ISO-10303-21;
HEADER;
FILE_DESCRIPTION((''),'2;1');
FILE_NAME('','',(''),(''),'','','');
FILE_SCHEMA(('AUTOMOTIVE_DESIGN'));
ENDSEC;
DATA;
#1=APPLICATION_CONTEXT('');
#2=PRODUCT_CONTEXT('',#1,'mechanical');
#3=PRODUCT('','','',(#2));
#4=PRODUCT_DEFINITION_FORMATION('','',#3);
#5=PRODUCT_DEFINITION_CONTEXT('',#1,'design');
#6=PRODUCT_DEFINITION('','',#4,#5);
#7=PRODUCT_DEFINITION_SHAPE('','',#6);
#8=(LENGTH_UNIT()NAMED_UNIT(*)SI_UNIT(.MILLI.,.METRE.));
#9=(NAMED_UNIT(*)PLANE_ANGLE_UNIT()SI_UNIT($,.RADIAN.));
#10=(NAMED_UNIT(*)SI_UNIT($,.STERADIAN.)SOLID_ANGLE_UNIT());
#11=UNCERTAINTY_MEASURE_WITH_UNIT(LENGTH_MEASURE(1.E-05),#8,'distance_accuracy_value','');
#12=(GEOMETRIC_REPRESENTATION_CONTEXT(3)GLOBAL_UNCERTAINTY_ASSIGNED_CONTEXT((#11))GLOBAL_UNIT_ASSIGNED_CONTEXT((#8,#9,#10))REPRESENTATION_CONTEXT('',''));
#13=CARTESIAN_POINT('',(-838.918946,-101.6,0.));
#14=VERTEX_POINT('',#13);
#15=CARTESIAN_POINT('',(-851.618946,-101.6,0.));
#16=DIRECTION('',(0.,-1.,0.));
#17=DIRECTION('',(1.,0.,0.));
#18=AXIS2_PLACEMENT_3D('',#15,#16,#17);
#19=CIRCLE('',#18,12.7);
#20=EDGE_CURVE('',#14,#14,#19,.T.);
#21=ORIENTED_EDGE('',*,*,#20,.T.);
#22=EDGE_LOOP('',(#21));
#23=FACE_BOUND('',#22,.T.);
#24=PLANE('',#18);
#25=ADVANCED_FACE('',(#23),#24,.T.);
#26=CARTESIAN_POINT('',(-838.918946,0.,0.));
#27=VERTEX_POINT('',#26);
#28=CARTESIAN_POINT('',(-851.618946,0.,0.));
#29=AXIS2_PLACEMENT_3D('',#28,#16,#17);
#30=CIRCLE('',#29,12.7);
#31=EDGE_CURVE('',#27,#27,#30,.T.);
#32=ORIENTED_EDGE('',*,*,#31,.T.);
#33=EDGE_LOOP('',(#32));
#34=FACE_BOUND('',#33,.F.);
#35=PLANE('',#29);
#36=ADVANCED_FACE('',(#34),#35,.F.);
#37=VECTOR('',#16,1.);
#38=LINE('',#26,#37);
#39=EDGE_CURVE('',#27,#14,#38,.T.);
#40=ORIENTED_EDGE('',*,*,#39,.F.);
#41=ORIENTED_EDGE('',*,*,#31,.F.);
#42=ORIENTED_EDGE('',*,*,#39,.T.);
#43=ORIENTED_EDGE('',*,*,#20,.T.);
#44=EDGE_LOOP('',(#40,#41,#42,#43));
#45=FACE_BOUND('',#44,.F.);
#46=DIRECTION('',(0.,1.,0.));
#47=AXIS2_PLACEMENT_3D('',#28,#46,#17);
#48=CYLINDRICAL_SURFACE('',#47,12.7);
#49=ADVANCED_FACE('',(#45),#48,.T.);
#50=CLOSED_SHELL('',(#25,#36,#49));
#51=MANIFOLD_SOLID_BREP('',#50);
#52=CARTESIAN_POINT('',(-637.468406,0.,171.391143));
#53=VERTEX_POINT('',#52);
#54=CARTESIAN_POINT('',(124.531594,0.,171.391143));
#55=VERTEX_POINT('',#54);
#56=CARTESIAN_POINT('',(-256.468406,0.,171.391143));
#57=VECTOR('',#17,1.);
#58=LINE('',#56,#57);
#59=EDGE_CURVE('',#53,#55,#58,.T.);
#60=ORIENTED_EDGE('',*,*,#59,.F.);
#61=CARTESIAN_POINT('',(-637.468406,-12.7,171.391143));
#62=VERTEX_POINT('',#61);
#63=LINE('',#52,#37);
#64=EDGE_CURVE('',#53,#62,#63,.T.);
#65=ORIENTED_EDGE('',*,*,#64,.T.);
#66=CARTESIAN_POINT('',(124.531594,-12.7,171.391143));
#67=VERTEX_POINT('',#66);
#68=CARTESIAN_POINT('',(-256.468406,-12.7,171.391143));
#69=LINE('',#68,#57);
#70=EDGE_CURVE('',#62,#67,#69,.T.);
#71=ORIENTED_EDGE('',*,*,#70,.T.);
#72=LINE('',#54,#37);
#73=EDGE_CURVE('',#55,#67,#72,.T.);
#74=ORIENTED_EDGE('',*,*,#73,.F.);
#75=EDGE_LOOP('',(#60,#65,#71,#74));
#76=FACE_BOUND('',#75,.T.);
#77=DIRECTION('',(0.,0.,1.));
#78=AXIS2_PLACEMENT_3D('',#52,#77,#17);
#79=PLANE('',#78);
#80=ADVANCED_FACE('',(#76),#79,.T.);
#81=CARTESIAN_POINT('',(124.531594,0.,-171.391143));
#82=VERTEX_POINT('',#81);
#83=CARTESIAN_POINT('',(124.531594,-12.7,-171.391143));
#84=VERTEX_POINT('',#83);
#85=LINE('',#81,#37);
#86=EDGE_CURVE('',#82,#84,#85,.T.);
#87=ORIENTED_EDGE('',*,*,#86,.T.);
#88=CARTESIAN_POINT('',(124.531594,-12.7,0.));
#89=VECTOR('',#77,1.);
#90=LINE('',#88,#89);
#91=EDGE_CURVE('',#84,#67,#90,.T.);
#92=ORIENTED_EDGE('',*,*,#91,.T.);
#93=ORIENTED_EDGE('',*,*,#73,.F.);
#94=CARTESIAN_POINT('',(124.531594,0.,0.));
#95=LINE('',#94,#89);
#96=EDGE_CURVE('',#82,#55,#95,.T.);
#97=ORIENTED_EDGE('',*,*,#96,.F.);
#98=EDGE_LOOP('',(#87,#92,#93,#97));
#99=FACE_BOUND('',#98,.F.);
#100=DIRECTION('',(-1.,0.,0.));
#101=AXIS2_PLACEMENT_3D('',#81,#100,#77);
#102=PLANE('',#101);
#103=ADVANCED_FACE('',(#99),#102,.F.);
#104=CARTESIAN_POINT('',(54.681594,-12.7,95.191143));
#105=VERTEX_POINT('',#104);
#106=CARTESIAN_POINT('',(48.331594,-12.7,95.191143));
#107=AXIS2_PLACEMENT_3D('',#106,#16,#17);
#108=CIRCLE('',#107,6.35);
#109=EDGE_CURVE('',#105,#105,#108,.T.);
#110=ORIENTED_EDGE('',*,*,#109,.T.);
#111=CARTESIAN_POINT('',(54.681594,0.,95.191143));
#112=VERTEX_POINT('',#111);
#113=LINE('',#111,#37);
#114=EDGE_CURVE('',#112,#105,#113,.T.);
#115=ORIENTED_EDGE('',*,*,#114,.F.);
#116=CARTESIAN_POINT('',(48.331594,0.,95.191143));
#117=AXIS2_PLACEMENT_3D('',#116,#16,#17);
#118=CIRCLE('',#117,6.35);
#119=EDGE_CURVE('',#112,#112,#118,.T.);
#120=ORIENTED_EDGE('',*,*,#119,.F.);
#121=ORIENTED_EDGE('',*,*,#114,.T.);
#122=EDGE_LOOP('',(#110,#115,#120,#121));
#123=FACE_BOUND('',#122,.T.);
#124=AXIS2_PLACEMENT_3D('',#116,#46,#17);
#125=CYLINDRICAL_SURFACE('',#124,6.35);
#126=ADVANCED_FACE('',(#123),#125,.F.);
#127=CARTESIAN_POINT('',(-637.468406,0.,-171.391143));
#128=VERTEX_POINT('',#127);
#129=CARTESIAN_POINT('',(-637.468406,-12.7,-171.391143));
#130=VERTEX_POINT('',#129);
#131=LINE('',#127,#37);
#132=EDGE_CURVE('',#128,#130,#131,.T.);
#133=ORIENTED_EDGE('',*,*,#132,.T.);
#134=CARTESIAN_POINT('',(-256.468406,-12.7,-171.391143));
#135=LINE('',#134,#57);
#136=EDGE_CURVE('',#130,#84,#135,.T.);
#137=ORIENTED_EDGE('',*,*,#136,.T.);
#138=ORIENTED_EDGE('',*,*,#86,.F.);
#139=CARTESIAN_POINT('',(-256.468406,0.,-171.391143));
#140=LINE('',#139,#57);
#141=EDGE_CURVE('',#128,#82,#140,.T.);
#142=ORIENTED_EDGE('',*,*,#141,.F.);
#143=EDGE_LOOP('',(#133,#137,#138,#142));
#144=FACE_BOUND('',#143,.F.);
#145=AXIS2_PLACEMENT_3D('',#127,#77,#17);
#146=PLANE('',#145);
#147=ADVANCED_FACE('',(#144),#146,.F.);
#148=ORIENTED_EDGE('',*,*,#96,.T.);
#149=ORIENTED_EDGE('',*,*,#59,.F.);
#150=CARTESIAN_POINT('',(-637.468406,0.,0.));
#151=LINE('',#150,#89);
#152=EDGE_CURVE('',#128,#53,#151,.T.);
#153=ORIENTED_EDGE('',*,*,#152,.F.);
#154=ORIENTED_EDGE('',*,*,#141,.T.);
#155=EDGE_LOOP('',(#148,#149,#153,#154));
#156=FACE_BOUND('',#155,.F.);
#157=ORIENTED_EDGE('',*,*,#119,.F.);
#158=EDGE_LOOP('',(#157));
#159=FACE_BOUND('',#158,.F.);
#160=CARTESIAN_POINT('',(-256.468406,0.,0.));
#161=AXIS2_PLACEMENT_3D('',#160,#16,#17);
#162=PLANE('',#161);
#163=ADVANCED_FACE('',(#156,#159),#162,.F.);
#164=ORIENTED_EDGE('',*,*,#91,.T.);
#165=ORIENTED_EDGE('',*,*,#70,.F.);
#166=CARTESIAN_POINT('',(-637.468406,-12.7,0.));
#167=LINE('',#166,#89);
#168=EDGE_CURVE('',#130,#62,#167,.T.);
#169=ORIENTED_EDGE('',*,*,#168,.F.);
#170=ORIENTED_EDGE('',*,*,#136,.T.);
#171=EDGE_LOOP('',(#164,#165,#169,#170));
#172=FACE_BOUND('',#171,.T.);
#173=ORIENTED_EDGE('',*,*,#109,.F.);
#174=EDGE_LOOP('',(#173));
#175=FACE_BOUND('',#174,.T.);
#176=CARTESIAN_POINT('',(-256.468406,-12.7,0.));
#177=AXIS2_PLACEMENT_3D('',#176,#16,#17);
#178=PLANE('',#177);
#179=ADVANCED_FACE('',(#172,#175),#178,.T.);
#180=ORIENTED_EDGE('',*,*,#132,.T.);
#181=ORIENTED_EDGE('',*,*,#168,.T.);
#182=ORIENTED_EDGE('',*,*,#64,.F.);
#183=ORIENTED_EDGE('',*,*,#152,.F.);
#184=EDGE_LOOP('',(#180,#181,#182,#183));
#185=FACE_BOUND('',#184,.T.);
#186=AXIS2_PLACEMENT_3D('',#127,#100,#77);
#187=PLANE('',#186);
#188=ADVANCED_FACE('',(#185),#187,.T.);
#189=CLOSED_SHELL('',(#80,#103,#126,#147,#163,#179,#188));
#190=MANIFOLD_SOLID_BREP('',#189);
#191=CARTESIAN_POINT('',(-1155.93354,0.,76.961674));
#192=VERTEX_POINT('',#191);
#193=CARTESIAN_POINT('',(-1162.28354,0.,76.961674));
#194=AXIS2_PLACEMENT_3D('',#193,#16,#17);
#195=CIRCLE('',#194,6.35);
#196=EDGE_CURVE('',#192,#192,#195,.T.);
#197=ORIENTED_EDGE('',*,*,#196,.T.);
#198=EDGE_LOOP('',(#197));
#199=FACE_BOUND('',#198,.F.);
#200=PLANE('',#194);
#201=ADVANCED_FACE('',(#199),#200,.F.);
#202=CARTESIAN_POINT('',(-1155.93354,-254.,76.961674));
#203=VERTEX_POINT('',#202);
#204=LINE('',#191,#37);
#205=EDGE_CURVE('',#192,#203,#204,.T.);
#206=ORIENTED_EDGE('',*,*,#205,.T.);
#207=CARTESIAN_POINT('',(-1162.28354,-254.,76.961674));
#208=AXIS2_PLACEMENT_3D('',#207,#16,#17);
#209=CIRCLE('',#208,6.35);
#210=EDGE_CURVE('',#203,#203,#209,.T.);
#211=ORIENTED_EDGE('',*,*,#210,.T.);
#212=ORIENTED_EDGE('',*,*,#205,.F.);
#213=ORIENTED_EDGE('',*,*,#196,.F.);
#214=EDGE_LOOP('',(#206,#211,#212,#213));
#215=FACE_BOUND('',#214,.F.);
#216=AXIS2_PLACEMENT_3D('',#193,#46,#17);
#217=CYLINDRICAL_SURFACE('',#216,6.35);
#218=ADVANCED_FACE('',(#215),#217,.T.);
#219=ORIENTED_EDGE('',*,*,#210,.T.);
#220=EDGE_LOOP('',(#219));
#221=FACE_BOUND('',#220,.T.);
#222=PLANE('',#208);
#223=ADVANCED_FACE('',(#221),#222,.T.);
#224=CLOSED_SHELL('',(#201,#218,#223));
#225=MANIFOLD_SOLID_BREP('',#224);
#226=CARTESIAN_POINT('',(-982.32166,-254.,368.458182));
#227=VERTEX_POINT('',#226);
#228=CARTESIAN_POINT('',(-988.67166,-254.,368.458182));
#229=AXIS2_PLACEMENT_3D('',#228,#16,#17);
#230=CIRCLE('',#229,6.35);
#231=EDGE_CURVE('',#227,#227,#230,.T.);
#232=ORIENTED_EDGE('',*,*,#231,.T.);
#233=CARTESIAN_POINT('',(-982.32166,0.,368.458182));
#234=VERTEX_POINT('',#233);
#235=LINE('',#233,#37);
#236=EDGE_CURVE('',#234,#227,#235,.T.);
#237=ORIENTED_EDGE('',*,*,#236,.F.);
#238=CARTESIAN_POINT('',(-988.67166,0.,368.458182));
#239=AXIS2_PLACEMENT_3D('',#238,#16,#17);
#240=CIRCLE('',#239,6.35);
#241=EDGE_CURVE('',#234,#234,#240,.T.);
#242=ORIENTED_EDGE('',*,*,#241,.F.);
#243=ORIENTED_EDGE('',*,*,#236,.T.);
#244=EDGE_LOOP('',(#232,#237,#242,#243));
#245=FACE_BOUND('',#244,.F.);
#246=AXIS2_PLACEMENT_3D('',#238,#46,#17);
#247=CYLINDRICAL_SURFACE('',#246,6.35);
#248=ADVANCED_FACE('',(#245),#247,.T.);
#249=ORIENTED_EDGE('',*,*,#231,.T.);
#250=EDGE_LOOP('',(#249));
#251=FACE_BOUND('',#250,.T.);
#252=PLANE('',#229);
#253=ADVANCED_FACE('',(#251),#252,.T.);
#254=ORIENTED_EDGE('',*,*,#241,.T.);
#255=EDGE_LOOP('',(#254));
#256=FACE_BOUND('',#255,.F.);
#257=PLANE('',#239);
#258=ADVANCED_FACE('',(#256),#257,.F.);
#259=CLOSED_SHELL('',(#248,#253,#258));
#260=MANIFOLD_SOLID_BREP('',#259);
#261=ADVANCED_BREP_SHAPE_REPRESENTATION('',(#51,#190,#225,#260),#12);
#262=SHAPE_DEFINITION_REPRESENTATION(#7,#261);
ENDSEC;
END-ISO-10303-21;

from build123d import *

# Parameters (mm, degrees)
F0_W     = 762
F0_H     = 342.7822869062
F0_R     = 6.35
F1_DEPTH = 12.7
F2_R     = 12.7
F3_DEPTH = 101.6
F4_DEPTH = 254


# Not quite as in the source:
# - the program builds the solid bodies; features that only make, move or delete a surface that nothing else refers to are left out


with BuildPart() as f1:
    # F0 (on Front) → F1 (new body)
    with BuildSketch(Plane.XZ):
        with Locations((-256.4684061597, 0)):
            Rectangle(F0_W, F0_H)
        with Locations((48.3315938403, 95.1911434531)):
            Circle(F0_R, mode=Mode.SUBTRACT)
    extrude(amount=F1_DEPTH)


with BuildPart() as f3:
    # F2 (on Front) → F3 (new body)
    with BuildSketch(Plane.XZ):
        with Locations((-851.6189455986, 0)):
            Circle(F2_R)
    extrude(amount=F3_DEPTH)


with BuildPart() as f4:
    # F0 (on Front) → F4 (new body)
    with BuildSketch(Plane.XZ):
        with Locations((-988.6716604233, 368.4581816196)):
            Circle(F0_R)
    extrude(amount=F4_DEPTH)


with BuildPart() as f4b:
    # F0 (on Front) → F4, piece 2 (new body)
    with BuildSketch(Plane.XZ):
        with Locations((-1162.283539772, 76.9616737962)):
            Circle(F0_R)
    extrude(amount=F4_DEPTH)


solid = Compound([f1.part, f3.part, f4.part, f4b.part])
